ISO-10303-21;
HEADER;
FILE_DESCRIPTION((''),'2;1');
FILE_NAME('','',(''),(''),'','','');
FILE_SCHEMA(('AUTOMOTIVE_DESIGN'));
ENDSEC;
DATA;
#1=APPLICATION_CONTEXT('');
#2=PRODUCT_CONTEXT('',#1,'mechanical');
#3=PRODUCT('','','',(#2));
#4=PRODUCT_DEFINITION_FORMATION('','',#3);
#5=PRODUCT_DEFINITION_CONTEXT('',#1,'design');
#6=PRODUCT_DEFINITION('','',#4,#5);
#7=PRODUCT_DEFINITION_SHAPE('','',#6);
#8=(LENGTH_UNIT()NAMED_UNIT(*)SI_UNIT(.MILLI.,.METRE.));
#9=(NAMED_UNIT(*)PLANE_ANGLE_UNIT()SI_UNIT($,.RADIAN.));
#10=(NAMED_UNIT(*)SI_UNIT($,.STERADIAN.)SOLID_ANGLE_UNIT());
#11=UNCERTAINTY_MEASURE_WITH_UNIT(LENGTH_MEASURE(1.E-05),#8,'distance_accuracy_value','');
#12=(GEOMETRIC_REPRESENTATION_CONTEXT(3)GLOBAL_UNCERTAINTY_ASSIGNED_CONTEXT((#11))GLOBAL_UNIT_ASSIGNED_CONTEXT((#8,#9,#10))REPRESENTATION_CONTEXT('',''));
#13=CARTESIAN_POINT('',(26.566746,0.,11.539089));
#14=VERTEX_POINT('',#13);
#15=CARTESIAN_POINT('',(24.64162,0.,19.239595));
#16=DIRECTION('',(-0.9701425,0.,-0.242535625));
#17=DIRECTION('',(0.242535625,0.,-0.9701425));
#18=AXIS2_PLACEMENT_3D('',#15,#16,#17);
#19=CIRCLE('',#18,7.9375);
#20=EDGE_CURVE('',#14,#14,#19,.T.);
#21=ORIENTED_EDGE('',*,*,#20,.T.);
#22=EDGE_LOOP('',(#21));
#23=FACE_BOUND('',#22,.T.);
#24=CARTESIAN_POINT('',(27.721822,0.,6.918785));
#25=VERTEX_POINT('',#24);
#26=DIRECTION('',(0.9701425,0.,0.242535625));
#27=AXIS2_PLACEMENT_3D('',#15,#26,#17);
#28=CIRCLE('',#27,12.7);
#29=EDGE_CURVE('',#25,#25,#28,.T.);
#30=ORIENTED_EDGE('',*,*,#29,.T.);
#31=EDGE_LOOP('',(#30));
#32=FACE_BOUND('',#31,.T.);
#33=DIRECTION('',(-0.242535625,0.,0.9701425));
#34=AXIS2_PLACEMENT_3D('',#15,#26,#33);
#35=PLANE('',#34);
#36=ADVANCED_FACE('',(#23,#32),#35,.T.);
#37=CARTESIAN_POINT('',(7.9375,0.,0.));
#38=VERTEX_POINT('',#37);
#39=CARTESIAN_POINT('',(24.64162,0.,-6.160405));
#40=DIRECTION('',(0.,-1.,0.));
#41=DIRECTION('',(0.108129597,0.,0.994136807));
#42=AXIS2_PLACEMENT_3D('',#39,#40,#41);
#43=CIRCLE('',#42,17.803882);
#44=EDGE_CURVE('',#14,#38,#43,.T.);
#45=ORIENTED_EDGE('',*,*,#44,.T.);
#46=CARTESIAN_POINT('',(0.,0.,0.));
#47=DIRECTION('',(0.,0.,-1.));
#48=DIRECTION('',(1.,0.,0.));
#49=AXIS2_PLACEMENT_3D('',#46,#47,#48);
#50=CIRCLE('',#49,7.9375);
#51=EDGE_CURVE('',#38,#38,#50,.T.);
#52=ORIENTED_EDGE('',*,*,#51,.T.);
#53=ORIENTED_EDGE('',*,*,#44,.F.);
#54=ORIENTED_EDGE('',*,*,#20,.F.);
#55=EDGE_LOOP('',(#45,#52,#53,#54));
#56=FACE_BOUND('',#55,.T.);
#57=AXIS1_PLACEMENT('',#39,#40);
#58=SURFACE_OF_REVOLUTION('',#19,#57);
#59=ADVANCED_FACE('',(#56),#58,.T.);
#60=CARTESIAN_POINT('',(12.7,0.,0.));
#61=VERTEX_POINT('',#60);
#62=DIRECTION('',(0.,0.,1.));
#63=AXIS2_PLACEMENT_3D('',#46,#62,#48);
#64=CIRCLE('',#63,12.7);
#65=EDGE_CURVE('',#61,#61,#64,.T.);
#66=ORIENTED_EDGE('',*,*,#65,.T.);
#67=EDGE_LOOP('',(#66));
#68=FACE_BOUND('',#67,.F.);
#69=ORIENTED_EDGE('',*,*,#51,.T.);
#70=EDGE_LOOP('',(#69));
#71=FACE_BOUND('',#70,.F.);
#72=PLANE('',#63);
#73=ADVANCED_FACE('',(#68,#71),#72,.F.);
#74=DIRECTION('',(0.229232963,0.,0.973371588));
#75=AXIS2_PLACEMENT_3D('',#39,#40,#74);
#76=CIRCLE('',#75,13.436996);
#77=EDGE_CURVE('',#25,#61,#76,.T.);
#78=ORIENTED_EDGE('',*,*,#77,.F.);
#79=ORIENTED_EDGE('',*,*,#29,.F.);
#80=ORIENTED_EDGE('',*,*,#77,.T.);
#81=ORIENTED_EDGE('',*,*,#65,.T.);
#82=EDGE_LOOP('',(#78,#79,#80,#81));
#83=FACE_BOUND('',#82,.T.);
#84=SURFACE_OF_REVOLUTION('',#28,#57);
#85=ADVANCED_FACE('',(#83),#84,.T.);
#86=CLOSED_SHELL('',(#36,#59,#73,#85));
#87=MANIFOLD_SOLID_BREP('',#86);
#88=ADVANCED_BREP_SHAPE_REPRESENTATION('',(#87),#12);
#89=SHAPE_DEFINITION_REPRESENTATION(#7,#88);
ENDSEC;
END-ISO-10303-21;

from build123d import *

# Parameters (mm, degrees)
F1_R   = 12.7
F1_R_2 = 7.9375


with BuildPart() as f2:
    # F2: sweep along a path in F0
    with BuildLine(Plane.XZ) as f2_path:
        ThreePointArc((24.6416195037, 19.2395951241), (9.0101493849, 13.8600132497), (0, 0))
    # F1 (on Top) → F2 (sweep)
    with BuildSketch(Plane.XY):
        Circle(F1_R)
        Circle(F1_R_2, mode=Mode.SUBTRACT)
    sweep(path=f2_path.line)


solid = f2.part
